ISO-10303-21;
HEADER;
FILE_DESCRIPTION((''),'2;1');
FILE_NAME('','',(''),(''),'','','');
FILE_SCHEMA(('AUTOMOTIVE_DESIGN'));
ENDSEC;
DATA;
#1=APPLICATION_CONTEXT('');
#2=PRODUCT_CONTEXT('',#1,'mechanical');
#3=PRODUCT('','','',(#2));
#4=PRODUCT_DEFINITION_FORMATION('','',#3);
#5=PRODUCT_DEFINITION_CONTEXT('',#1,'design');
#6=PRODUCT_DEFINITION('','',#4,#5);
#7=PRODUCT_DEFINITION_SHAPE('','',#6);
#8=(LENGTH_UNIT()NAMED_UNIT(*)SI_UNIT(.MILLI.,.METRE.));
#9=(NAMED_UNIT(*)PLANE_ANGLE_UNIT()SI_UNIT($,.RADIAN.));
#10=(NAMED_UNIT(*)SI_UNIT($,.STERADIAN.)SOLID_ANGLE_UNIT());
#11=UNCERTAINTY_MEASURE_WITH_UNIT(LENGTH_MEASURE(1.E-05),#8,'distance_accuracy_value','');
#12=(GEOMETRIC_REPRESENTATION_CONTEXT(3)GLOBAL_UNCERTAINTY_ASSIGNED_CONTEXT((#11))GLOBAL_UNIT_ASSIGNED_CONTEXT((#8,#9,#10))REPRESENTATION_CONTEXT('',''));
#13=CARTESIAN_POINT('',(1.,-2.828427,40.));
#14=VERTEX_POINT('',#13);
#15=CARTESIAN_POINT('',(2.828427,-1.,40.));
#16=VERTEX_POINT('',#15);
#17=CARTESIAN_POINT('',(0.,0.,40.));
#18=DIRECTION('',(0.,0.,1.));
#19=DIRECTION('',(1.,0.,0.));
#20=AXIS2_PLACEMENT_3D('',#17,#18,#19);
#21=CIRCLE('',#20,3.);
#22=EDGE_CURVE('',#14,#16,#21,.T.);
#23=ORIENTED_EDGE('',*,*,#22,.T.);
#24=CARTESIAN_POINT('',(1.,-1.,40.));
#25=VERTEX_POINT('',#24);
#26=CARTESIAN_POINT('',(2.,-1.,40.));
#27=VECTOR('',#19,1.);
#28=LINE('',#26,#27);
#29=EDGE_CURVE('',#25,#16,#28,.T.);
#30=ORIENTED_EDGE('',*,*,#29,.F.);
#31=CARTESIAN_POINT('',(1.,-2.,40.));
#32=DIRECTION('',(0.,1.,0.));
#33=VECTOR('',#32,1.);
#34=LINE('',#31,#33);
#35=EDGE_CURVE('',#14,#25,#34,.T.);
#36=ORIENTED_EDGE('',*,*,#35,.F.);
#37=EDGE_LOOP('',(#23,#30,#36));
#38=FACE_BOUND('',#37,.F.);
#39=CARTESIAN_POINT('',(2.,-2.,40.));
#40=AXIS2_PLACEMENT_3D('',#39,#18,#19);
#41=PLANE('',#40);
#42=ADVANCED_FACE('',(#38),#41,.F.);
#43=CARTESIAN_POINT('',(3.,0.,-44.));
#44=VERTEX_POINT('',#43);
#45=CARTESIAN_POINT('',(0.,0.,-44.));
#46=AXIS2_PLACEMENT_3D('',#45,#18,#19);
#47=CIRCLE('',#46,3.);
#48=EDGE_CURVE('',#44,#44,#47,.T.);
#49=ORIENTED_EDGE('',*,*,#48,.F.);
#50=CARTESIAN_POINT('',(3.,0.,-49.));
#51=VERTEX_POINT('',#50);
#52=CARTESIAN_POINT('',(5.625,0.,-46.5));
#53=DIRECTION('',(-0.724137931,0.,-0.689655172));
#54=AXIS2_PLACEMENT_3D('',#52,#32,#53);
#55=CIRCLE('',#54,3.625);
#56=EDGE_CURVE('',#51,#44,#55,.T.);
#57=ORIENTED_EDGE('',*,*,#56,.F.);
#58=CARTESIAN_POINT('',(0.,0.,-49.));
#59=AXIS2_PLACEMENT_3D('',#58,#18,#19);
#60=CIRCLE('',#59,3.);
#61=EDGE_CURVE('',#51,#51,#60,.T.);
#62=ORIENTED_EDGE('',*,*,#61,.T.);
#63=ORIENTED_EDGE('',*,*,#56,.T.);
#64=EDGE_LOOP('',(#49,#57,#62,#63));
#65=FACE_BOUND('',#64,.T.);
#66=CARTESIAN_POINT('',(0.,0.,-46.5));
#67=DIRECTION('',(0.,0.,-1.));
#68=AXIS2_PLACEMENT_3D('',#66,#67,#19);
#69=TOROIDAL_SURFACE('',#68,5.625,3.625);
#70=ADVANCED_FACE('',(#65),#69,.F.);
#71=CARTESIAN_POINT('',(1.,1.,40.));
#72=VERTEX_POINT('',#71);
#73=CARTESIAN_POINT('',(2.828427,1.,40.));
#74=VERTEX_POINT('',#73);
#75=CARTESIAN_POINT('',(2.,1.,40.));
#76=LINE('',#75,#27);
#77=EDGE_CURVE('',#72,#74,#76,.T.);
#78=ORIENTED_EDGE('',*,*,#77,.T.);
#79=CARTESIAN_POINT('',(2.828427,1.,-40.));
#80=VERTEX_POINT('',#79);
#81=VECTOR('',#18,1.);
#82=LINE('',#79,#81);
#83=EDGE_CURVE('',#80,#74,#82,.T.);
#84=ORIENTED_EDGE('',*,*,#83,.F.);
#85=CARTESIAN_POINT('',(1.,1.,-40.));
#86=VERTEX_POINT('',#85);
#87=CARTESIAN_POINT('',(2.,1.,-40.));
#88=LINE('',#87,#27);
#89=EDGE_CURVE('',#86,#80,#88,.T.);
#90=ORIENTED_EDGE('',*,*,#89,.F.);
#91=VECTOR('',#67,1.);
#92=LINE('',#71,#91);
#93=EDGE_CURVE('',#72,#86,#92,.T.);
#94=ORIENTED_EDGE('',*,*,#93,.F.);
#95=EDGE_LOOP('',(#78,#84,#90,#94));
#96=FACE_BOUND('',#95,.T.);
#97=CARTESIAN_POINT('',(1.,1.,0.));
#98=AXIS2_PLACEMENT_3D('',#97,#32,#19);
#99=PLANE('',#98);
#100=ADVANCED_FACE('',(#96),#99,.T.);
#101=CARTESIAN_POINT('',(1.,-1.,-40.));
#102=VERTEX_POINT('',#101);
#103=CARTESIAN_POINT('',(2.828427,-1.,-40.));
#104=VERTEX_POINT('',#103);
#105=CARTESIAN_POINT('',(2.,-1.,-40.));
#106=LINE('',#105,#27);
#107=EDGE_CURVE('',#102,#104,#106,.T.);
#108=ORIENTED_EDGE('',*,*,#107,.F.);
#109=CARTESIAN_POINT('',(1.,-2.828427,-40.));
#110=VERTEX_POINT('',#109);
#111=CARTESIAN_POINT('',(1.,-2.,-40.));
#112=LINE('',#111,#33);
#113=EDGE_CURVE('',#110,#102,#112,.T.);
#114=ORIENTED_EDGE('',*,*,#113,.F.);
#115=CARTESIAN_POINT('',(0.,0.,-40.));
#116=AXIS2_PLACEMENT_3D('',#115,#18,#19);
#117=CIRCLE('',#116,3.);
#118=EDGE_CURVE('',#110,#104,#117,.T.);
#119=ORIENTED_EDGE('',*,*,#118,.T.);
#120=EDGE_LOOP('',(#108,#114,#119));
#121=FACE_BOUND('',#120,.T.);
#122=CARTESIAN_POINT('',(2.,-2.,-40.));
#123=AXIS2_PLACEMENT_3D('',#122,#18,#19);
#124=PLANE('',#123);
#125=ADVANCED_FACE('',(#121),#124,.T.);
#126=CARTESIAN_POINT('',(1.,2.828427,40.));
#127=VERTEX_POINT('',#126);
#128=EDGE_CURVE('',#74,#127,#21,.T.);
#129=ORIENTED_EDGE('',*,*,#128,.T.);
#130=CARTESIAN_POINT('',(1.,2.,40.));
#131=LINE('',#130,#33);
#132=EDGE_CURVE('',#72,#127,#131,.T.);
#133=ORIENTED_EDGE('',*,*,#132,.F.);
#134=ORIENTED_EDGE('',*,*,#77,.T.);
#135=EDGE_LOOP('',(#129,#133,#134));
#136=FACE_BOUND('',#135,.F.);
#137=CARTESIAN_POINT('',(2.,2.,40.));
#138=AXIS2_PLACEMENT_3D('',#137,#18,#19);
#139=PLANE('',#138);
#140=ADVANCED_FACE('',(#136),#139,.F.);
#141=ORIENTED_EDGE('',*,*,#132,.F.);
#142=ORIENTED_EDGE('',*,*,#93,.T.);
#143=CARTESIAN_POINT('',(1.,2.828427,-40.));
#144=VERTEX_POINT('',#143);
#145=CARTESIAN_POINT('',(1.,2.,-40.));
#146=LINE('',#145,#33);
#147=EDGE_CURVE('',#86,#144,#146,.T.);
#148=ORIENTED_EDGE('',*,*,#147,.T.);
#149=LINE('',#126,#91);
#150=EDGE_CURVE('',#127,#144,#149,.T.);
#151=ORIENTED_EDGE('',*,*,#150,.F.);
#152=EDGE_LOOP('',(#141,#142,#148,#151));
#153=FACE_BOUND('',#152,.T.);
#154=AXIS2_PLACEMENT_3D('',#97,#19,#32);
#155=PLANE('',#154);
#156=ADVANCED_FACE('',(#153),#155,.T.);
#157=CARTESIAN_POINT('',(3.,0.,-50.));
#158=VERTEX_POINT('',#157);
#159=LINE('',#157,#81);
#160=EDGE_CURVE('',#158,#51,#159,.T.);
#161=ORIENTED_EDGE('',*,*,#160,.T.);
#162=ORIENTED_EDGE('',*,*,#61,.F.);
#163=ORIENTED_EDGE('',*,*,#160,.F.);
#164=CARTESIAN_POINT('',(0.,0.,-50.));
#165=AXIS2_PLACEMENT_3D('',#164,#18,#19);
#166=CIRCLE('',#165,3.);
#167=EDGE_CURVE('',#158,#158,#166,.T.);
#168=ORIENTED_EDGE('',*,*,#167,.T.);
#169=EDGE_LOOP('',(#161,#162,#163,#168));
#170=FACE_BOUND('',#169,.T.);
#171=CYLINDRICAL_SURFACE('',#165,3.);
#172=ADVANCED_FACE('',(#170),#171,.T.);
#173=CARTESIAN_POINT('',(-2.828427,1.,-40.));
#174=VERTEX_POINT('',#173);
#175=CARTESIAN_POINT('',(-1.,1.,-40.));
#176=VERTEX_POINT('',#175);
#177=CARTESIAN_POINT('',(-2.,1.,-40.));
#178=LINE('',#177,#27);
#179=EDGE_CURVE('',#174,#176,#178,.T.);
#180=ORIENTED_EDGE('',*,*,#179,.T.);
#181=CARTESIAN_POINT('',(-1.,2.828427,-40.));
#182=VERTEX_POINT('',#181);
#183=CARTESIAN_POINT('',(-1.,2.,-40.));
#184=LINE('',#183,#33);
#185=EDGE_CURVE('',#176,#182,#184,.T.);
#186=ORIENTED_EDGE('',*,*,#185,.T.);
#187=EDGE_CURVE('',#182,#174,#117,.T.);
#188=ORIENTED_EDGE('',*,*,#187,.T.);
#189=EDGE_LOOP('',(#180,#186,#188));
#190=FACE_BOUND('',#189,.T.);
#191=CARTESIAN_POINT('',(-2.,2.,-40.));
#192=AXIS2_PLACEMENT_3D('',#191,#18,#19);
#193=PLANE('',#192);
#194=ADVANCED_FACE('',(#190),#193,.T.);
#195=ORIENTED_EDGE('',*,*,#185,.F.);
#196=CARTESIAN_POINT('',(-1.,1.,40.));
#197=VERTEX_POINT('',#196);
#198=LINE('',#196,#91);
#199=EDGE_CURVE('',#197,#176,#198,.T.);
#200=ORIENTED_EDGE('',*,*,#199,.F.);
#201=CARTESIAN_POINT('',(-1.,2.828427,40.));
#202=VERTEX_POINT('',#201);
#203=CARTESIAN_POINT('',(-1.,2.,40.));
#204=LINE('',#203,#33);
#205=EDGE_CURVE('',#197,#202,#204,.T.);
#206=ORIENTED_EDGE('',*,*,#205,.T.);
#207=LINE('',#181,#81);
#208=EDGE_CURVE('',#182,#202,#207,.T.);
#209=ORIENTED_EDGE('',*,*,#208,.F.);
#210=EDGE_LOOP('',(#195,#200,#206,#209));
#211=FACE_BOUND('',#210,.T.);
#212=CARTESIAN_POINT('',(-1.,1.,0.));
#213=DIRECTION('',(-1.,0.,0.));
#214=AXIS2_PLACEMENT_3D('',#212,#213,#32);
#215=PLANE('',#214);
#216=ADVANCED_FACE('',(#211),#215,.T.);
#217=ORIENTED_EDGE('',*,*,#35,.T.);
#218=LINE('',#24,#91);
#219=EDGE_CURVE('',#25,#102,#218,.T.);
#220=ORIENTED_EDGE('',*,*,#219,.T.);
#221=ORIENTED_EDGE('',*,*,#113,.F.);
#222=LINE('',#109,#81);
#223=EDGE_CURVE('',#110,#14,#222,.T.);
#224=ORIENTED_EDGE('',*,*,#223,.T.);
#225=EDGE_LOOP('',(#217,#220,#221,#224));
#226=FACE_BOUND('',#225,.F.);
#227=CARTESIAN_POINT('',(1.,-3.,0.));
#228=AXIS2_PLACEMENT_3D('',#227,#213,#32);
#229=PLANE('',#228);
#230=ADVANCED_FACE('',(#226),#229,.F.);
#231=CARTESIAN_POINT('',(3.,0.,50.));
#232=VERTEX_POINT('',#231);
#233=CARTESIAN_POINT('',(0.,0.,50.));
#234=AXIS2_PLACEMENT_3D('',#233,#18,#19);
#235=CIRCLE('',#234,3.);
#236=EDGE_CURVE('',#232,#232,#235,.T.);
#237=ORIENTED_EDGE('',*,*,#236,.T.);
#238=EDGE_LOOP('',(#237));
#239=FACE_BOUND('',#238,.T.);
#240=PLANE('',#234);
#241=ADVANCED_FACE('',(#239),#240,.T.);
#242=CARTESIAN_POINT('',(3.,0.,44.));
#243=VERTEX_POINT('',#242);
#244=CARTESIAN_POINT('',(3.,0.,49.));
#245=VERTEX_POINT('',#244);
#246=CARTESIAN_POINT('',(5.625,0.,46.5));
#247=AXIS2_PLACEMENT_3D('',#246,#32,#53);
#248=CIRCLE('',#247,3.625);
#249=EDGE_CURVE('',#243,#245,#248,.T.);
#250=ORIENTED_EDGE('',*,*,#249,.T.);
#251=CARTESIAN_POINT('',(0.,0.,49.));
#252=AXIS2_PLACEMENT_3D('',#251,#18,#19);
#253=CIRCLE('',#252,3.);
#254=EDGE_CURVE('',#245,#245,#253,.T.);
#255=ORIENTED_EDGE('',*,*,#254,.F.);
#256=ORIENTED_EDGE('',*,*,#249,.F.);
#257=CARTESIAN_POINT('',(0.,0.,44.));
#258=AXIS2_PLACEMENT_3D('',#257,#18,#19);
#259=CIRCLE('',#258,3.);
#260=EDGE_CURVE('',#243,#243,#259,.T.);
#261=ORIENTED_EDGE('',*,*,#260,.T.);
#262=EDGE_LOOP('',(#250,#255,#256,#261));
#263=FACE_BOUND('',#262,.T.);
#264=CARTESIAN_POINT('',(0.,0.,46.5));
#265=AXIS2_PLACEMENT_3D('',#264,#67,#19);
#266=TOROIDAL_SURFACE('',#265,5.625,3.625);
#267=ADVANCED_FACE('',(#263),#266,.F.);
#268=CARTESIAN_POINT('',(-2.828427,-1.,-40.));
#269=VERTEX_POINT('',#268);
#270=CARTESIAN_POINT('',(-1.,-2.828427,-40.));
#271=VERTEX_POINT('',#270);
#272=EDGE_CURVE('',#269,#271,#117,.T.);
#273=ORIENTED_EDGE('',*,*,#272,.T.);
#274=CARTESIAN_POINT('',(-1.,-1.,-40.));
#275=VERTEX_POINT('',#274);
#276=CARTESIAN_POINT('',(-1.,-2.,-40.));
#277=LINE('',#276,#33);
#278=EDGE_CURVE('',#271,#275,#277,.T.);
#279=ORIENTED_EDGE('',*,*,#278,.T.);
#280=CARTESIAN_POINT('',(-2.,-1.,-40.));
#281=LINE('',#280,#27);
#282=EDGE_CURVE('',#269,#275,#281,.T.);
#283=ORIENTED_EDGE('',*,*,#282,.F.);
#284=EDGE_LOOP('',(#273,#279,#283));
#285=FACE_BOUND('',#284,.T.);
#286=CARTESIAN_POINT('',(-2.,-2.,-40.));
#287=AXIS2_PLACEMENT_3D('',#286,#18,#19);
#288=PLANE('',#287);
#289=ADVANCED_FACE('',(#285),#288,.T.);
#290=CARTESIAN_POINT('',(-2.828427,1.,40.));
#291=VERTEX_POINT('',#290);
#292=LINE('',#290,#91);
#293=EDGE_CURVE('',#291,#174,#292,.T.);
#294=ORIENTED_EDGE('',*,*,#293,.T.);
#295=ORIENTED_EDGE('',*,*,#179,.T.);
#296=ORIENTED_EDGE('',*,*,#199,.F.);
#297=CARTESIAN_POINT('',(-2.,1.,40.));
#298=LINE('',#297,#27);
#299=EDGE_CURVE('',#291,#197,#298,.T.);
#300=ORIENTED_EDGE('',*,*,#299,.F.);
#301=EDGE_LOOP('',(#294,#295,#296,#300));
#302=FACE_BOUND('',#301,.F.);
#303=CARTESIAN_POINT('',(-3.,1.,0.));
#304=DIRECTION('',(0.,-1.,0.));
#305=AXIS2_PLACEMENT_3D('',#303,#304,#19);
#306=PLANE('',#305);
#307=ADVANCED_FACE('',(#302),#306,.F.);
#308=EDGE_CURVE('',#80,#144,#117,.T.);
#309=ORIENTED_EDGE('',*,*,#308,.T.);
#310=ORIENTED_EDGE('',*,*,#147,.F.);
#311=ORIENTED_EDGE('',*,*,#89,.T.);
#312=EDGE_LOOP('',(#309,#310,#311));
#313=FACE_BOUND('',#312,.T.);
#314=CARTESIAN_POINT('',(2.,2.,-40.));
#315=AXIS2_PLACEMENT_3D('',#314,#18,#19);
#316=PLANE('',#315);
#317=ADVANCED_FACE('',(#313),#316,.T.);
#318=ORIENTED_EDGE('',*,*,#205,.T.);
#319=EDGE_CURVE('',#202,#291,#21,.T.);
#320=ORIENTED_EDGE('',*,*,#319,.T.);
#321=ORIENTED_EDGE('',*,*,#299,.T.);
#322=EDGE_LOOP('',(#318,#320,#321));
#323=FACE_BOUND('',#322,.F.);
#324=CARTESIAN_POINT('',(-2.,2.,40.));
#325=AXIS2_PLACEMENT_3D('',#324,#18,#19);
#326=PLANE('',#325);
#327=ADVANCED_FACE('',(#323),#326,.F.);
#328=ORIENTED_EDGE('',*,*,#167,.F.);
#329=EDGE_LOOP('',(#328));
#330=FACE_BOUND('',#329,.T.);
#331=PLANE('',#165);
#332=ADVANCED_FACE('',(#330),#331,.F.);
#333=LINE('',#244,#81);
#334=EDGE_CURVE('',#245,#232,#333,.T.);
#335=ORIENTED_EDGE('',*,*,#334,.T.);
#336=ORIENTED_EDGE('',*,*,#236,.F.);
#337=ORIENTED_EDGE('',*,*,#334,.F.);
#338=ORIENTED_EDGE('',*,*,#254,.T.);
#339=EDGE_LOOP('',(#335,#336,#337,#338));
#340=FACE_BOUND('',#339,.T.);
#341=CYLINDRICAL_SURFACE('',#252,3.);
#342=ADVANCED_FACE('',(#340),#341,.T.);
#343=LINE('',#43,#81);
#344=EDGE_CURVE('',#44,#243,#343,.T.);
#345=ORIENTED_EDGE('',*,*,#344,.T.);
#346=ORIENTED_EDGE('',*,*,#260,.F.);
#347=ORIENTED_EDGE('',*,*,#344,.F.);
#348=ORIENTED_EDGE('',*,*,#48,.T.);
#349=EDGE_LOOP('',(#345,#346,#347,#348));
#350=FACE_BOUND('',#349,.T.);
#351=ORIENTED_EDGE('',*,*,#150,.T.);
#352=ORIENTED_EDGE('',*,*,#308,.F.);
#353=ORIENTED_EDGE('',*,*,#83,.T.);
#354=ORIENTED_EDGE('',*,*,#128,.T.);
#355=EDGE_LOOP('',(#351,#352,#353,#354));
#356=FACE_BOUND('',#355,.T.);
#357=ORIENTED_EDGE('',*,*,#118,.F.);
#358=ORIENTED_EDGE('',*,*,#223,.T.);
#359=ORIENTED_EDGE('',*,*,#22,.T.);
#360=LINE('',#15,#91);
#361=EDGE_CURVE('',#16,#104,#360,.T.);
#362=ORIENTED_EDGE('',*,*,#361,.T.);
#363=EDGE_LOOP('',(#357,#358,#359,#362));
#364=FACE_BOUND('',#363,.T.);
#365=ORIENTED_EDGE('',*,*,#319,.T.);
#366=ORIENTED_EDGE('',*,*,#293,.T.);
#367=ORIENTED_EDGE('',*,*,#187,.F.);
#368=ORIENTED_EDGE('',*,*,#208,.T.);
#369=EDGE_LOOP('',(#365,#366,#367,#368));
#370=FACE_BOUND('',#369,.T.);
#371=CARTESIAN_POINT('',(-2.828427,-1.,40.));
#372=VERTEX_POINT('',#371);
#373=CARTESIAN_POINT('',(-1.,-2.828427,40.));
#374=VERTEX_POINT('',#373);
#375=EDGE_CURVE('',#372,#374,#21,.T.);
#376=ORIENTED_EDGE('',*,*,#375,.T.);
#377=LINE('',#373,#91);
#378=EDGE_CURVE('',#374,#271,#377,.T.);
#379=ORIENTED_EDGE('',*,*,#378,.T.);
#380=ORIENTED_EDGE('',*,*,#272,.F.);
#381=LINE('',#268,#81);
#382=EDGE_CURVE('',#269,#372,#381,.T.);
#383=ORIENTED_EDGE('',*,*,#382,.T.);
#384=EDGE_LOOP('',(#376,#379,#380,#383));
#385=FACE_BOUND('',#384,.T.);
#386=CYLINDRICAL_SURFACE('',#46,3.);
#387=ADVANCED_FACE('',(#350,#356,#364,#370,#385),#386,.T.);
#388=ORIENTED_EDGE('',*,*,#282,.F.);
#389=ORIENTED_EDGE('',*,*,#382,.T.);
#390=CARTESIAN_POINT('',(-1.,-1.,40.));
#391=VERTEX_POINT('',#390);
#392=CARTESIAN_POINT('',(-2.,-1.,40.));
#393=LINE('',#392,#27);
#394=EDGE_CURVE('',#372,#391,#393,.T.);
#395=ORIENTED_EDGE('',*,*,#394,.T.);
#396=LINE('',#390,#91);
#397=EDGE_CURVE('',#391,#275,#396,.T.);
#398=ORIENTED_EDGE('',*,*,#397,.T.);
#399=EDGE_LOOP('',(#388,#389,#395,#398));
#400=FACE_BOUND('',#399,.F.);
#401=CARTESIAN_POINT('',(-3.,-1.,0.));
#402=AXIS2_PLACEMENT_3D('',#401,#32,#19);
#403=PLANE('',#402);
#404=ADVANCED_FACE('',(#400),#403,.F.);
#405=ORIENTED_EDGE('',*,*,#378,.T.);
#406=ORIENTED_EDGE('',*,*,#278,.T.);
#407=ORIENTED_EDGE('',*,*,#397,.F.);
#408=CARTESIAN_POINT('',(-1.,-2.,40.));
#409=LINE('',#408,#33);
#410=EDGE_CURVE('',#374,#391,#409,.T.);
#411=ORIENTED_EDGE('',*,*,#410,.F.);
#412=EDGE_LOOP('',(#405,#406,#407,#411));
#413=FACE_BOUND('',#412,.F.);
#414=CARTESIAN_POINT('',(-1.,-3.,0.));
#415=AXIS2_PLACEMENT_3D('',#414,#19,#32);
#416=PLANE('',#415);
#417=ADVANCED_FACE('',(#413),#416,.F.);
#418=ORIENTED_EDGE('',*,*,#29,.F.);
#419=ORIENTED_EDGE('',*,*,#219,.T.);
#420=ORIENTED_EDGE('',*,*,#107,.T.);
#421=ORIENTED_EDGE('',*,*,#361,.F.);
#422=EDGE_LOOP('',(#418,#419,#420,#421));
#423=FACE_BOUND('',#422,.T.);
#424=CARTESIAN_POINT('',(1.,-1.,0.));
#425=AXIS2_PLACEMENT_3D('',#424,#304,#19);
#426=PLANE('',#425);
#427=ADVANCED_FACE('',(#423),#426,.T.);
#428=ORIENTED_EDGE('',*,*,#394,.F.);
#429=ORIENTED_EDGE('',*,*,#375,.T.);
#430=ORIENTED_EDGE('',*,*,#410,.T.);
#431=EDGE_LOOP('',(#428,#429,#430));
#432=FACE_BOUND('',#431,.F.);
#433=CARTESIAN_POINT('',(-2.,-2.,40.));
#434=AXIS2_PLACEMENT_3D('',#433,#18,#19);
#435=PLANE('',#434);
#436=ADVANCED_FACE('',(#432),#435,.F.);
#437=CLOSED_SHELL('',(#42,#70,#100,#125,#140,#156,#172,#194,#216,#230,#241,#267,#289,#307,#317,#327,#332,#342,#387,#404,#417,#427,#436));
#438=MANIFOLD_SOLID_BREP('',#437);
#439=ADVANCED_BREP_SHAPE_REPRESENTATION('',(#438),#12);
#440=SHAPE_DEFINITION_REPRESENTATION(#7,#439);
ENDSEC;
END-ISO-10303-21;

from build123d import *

# Parameters (mm, degrees)
F2_W          = 2
F2_H          = 2
F3_DEPTH      = 40
F3_DEPTH_BACK = 40


# Not quite as in the source:
# - a feature names something its author has since deleted; it is built from what else it names


with BuildPart() as f1:
    # F0 (on Front) → F1 (revolve)
    with BuildSketch(Plane.XZ):
        with BuildLine():
            Line((0, 50), (0, -50))
            Line((0, -50), (3, -50))
            Line((3, -50), (3, -49))
            ThreePointArc((3, -49), (2, -46.5), (3, -44))
            Line((3, -44), (3, 0))
            Line((3, 0), (3, 44))
            ThreePointArc((3, 44), (2, 46.5), (3, 49))
            Line((3, 49), (3, 50))
            Line((3, 50), (0, 50))
        make_face()
    revolve(axis=Axis((0, 0, 0), (0, 0, 1)))

    # F2 (on Top) → F3 (cut, two sides)
    with BuildSketch(Plane.XY) as f3_sk:
        with Locations((2, 2)):
            Rectangle(F2_W, F2_H)
        with Locations((-2, 2)):
            Rectangle(F2_W, F2_H)
        with Locations((-2, -2)):
            Rectangle(F2_W, F2_H)
        with Locations((2, -2)):
            Rectangle(F2_W, F2_H)
    extrude(amount=-F3_DEPTH, mode=Mode.SUBTRACT)
    extrude(f3_sk.sketch, amount=F3_DEPTH_BACK, mode=Mode.SUBTRACT)


solid = f1.part
